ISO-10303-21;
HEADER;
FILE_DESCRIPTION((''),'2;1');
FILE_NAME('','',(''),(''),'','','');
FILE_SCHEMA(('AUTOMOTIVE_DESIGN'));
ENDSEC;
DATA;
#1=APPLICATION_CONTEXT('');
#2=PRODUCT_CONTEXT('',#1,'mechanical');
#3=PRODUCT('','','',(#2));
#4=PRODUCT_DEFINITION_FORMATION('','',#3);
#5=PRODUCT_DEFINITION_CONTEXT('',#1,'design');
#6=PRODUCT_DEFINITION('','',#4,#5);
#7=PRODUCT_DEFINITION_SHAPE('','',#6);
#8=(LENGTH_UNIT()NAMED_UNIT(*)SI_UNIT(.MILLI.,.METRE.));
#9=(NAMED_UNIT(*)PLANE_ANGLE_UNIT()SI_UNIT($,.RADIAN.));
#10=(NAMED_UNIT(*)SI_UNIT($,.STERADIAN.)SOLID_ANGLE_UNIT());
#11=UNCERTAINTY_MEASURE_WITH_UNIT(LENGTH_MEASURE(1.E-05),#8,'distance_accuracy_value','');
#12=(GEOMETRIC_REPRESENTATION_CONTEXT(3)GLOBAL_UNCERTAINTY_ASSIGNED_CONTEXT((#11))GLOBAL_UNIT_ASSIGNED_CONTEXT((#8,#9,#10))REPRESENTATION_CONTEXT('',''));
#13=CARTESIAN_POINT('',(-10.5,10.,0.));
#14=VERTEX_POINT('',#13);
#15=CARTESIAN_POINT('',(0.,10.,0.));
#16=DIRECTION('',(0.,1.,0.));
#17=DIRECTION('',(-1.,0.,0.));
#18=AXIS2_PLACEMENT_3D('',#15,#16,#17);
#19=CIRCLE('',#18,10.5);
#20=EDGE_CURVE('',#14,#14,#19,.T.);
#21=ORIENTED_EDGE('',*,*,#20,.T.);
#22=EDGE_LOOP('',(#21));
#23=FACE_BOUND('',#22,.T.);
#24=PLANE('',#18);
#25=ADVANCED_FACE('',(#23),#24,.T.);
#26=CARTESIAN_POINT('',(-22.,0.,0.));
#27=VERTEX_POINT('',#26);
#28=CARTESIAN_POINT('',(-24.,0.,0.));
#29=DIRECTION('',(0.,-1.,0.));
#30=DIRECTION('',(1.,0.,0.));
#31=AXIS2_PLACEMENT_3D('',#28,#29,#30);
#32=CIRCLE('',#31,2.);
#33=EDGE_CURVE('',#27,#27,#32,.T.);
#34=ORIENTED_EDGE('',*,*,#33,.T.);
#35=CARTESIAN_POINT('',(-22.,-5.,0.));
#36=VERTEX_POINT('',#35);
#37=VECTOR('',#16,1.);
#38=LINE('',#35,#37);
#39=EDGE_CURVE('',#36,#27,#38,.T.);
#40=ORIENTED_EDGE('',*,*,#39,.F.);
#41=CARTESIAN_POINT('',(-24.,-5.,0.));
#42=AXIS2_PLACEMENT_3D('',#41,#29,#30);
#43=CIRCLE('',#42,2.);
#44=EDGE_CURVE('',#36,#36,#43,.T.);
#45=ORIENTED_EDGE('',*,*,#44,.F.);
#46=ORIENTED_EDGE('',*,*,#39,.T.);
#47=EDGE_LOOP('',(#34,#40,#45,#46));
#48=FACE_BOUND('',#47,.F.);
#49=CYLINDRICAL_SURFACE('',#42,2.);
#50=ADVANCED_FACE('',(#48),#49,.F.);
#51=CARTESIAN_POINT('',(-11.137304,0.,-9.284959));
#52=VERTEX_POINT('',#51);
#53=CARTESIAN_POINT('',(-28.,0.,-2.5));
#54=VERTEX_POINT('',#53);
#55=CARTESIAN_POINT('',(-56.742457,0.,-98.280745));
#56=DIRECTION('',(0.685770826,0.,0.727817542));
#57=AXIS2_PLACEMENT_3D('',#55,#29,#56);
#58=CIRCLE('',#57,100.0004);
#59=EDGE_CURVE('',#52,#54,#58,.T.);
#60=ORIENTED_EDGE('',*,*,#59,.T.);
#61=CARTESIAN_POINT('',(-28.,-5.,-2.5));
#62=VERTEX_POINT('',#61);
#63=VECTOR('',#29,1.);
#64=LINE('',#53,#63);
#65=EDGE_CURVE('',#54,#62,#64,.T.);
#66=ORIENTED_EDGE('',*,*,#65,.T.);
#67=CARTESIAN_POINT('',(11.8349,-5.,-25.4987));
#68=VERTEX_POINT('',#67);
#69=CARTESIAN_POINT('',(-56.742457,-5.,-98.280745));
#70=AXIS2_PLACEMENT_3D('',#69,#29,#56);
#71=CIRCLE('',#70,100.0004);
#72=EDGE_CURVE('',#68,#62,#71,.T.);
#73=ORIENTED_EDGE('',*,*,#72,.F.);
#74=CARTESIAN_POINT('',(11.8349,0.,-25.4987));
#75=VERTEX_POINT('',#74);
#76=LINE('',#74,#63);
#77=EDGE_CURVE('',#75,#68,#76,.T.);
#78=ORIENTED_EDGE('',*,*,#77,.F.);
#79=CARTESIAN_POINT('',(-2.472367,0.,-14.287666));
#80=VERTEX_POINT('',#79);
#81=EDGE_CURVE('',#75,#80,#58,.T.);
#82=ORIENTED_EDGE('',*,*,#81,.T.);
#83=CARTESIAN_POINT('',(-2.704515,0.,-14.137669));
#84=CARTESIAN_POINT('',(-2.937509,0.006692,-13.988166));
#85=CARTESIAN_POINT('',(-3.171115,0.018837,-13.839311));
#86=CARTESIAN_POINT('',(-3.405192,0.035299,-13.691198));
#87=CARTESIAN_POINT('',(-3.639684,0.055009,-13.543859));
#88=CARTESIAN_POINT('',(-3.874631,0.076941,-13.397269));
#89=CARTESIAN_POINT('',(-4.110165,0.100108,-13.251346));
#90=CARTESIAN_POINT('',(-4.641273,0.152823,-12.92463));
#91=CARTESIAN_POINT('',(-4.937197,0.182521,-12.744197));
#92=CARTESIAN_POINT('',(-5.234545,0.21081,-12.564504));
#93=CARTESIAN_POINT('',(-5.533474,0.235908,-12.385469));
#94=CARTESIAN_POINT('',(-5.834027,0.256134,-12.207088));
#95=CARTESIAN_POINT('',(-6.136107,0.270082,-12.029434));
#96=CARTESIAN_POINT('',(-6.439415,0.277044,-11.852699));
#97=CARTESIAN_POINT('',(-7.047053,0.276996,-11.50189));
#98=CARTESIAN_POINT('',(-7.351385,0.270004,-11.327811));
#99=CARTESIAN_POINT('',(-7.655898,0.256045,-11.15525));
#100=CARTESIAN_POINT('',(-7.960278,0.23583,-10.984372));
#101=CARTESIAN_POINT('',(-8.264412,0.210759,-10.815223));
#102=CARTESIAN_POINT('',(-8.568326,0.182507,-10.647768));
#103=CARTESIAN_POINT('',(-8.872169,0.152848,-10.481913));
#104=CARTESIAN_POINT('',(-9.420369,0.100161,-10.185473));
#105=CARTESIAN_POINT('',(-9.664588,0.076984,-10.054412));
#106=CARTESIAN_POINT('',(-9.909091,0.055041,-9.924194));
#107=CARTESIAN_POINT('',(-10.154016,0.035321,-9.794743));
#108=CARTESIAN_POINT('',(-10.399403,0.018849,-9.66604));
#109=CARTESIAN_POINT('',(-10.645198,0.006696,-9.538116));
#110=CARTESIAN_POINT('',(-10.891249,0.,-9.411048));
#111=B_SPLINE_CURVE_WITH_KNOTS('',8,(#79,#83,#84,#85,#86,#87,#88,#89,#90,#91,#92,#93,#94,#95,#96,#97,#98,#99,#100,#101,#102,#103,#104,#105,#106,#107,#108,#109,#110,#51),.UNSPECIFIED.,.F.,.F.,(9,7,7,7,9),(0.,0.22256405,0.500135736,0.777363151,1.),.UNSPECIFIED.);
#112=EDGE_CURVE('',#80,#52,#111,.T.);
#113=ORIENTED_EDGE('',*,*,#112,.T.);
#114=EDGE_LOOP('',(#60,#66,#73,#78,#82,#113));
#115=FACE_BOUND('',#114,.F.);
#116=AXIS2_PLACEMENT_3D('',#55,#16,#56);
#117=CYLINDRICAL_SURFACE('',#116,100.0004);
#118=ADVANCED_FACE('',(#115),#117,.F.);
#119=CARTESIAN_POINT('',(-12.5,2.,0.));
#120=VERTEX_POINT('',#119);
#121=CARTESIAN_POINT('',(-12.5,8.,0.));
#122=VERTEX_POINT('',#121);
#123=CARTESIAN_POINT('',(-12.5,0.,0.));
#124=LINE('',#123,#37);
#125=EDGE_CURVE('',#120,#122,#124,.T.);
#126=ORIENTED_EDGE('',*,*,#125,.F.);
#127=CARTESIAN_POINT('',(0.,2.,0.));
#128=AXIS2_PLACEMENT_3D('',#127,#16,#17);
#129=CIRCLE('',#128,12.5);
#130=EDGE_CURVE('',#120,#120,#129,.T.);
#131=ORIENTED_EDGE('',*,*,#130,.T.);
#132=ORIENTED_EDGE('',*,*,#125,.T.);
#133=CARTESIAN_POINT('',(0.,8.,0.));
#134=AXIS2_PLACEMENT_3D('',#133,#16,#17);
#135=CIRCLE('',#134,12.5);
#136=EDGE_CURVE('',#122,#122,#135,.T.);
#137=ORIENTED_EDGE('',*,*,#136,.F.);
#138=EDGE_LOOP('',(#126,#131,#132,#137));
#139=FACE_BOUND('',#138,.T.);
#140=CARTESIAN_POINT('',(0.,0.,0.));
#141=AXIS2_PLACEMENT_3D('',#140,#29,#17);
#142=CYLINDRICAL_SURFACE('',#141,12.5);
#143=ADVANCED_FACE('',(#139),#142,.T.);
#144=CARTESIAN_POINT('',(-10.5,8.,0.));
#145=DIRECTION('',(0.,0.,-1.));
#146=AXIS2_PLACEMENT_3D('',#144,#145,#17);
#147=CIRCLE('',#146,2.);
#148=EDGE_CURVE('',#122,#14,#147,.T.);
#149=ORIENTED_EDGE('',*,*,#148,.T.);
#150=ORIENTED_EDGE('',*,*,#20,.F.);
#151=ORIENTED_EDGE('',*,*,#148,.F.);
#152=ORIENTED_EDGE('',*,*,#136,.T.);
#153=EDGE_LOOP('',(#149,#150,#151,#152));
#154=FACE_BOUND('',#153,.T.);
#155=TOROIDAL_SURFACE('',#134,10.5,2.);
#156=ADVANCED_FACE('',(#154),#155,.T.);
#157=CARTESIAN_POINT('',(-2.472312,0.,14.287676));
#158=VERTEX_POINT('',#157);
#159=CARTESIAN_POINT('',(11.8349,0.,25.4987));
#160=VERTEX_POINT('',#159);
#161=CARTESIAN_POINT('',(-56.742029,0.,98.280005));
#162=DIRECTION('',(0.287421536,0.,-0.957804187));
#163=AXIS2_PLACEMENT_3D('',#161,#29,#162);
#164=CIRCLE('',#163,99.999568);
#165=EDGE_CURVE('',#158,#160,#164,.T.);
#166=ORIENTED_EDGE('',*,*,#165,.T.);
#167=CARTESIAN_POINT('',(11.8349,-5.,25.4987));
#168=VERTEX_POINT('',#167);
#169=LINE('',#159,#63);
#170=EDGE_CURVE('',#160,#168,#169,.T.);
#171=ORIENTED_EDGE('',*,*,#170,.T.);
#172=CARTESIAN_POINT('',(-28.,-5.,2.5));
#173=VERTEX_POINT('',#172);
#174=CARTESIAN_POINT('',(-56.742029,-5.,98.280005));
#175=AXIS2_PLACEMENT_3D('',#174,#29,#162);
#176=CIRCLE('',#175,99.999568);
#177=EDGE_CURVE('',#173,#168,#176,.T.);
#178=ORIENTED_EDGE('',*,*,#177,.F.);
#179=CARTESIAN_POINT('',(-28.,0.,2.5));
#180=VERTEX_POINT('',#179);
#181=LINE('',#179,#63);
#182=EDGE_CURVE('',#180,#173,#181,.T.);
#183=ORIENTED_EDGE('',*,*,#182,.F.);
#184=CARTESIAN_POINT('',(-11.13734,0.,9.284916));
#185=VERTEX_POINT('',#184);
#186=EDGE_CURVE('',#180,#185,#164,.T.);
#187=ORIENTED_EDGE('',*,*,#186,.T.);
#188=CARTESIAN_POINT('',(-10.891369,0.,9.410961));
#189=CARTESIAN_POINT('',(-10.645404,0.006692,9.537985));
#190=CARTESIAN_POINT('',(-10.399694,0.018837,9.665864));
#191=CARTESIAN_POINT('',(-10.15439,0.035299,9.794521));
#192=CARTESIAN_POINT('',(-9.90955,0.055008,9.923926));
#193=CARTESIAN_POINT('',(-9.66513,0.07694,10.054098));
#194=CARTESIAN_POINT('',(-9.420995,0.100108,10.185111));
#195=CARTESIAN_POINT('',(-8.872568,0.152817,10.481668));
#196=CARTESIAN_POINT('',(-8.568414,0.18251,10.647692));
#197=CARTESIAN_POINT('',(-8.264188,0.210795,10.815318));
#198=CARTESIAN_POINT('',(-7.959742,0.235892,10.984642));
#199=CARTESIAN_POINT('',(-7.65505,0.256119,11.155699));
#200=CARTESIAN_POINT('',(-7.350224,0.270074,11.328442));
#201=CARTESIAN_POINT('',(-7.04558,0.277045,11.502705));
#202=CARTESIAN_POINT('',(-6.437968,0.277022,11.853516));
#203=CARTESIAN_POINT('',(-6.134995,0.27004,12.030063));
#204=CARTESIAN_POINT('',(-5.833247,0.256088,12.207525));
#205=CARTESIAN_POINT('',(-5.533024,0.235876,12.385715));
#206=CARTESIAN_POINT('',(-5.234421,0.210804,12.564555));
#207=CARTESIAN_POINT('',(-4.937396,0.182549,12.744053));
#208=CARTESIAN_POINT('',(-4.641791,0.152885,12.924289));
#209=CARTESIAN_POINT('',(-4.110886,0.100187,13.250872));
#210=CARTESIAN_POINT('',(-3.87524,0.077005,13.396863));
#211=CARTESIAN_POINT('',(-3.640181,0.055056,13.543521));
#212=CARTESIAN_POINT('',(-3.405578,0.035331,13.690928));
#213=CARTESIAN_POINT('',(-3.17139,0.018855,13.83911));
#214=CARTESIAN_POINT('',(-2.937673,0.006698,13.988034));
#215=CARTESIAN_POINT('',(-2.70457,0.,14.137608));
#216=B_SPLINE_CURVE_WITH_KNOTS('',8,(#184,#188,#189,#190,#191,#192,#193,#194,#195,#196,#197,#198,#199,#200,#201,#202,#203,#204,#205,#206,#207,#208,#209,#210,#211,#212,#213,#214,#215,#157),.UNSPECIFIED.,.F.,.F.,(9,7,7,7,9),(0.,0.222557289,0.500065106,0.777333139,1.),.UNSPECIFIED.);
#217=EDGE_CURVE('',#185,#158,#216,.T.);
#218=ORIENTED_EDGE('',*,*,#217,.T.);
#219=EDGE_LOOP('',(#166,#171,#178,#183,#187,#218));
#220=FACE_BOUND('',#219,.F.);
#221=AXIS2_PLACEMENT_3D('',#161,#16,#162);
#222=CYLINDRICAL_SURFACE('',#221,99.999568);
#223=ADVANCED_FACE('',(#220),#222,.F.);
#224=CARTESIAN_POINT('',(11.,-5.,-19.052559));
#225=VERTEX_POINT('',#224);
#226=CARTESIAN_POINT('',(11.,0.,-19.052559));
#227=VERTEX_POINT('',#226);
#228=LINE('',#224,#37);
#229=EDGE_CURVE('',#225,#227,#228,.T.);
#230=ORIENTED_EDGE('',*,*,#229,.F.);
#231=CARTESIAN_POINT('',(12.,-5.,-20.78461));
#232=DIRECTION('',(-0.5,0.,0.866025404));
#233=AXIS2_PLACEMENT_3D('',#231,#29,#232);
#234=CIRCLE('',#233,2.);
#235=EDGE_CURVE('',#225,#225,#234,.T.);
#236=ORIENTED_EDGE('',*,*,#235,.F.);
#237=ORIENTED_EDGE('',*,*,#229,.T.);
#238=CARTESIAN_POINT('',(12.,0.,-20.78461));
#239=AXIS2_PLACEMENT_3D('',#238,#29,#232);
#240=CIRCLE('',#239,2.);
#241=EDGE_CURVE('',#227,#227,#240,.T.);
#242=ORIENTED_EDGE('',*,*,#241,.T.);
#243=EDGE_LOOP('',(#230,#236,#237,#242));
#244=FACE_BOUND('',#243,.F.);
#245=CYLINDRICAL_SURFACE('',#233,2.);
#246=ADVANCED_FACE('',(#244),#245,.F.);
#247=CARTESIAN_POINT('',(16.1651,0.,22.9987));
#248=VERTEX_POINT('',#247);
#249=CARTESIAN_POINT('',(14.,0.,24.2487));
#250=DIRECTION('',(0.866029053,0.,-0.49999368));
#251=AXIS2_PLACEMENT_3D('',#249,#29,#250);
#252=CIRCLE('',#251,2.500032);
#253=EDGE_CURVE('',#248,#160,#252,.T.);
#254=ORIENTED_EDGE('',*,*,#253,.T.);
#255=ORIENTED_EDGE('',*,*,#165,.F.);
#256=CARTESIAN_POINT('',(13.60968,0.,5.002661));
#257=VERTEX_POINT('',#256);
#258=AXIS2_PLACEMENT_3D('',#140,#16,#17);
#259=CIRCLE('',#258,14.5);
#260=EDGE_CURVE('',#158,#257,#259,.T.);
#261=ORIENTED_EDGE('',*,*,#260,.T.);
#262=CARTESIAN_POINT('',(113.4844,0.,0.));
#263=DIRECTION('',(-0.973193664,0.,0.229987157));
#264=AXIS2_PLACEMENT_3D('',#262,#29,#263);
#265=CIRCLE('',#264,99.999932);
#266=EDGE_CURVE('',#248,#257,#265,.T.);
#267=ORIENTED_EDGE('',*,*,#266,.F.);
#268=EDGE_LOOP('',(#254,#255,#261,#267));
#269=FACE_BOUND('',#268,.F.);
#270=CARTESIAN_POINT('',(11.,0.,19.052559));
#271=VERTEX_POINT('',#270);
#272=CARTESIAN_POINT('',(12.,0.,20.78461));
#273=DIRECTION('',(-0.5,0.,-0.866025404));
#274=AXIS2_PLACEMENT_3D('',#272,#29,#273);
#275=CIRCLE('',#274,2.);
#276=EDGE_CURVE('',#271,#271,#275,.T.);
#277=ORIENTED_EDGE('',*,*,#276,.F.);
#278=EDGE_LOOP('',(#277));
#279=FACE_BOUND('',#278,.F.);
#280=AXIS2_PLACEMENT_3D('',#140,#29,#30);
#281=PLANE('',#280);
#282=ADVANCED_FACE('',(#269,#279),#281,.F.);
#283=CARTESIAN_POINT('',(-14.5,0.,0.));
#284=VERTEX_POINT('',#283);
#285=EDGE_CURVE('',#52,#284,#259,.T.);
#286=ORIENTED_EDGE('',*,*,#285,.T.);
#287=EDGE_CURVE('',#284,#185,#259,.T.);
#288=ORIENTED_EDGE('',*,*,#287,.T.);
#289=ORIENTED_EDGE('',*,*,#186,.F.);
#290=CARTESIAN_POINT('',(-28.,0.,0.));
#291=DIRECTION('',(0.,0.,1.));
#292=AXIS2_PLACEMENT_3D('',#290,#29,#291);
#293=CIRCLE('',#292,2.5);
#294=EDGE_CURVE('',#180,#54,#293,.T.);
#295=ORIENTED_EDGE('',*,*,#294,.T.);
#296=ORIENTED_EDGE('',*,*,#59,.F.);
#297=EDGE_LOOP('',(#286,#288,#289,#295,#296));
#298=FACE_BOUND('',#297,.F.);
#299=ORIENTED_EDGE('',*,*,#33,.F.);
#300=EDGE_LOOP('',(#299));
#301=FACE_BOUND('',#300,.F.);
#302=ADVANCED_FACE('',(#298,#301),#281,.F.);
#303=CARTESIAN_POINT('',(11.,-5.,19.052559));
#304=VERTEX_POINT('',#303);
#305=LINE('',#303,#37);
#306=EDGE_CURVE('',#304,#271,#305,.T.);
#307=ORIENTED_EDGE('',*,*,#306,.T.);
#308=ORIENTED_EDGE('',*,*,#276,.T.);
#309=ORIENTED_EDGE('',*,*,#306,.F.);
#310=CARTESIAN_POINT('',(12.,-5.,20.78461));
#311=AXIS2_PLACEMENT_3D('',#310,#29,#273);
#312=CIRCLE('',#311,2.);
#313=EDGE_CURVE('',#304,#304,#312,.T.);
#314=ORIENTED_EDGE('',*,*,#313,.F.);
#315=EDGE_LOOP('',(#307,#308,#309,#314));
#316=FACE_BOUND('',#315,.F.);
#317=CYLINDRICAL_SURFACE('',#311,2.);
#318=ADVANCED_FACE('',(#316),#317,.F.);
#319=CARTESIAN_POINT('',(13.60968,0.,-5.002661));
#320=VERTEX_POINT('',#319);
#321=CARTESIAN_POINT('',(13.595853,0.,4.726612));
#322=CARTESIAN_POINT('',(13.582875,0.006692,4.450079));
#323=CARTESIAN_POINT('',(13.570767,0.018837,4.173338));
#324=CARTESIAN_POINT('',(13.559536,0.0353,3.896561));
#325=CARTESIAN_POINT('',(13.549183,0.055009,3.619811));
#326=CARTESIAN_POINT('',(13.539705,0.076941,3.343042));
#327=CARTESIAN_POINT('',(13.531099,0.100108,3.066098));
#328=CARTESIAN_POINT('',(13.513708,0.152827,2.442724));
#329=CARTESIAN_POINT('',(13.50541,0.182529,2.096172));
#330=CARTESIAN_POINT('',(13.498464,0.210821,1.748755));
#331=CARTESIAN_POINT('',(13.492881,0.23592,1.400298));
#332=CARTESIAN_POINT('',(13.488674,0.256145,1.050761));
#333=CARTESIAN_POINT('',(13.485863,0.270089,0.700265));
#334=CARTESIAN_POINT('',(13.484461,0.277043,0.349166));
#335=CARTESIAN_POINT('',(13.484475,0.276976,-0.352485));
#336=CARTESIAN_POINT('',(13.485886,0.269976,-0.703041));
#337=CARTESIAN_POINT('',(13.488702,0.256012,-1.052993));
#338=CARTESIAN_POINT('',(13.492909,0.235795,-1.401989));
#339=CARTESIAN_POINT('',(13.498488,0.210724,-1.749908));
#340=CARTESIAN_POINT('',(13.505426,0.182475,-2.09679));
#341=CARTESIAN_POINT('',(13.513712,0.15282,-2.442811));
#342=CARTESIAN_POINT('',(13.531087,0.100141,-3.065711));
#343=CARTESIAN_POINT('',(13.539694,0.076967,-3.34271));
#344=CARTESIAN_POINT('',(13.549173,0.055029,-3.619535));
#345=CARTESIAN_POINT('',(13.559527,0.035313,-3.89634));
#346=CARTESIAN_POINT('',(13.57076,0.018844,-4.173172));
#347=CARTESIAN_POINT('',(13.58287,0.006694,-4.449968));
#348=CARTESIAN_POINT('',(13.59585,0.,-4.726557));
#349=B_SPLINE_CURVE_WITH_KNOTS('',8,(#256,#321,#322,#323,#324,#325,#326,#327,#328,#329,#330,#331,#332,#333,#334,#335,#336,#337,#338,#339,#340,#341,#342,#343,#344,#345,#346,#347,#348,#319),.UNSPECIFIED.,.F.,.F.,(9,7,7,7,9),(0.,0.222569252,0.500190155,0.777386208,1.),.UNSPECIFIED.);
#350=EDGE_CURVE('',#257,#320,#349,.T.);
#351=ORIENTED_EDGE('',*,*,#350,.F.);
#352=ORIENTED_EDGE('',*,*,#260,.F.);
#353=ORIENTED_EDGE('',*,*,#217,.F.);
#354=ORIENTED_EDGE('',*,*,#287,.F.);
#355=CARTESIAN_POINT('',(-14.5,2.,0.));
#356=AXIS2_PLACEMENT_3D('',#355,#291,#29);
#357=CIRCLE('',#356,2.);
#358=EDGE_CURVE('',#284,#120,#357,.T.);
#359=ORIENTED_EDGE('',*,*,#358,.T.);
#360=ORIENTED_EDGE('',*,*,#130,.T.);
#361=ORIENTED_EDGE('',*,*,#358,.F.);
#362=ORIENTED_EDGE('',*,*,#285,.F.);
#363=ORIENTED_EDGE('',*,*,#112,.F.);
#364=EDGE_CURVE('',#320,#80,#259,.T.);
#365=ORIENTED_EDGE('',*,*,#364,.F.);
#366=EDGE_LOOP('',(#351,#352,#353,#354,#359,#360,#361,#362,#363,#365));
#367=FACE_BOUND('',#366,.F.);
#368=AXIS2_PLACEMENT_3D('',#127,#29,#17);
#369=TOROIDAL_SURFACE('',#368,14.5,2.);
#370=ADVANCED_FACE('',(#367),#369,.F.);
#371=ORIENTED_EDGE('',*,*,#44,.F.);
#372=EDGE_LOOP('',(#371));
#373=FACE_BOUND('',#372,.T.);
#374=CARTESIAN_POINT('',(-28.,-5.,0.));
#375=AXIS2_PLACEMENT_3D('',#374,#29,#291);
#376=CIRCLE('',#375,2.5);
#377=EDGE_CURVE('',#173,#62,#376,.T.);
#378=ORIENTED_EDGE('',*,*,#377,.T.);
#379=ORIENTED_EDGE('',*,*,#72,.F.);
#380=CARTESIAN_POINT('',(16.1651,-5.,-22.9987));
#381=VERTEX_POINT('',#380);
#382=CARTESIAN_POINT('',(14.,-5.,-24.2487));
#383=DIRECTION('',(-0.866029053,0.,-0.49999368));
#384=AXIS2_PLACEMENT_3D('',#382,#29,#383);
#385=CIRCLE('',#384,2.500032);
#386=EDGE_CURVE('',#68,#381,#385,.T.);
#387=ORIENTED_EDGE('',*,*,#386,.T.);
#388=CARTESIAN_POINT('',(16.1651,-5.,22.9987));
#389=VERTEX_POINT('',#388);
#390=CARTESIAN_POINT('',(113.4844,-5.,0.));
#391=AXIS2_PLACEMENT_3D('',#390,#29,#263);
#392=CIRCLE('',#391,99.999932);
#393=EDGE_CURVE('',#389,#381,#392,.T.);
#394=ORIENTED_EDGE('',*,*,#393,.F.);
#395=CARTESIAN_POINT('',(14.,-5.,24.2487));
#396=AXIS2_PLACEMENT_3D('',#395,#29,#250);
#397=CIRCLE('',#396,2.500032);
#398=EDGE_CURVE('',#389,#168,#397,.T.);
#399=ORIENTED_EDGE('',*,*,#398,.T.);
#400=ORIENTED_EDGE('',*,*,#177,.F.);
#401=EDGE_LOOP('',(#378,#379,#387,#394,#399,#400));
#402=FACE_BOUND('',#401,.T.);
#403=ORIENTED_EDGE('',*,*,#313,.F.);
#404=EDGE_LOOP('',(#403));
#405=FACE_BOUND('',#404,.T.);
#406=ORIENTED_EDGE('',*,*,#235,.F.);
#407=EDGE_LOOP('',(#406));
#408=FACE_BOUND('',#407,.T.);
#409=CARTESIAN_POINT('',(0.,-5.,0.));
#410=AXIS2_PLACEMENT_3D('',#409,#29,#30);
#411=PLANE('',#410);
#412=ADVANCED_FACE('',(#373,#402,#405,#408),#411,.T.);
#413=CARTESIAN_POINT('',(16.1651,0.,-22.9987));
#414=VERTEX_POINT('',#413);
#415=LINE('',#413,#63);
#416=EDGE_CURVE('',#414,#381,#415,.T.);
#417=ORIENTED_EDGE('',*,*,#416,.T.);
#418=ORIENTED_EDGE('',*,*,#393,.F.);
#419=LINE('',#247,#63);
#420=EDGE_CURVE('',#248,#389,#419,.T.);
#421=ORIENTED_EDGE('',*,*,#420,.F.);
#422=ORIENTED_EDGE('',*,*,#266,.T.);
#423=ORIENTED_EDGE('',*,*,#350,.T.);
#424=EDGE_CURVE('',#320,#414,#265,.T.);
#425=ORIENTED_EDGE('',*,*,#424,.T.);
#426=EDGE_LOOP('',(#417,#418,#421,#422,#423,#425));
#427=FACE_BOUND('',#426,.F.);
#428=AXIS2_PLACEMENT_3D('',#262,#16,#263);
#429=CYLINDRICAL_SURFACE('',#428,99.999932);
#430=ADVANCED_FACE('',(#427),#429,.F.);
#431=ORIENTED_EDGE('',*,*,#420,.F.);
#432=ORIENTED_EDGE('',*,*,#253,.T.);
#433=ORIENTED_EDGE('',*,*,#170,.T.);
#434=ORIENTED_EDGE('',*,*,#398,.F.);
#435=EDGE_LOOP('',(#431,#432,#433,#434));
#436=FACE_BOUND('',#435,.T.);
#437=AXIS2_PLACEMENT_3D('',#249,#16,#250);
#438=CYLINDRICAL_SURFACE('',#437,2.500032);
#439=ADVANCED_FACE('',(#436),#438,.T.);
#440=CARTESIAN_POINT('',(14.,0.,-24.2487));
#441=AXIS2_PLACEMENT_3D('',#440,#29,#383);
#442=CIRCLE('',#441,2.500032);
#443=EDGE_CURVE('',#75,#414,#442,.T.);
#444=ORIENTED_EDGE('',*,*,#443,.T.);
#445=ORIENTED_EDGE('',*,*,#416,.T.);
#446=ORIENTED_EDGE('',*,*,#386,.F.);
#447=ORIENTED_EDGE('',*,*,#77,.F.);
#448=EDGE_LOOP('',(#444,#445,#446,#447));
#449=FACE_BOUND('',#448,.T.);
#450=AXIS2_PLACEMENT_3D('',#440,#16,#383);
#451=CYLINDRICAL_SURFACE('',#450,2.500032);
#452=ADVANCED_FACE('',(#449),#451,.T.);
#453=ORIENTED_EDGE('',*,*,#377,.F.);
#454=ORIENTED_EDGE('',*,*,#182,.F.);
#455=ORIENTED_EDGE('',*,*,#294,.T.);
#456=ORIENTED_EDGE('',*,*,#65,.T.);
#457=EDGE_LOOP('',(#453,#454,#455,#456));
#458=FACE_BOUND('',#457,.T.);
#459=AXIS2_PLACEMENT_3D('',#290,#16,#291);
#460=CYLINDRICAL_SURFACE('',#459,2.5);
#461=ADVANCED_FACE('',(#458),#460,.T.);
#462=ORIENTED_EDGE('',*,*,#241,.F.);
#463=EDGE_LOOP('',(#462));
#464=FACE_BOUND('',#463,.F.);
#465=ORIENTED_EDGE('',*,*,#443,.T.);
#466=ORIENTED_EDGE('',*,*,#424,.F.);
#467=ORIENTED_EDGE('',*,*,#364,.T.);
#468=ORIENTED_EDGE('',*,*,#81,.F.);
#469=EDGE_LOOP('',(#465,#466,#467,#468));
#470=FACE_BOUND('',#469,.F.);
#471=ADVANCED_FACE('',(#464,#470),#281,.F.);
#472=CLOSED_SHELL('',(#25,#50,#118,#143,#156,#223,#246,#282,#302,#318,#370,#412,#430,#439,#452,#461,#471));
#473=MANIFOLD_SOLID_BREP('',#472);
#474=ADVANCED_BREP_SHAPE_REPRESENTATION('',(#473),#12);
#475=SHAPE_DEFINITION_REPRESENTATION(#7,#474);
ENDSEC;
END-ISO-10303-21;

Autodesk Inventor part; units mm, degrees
ref_plane "YZ Plane" through (0, 0, 0) normal (1, 0, 0) x (0, 1, 0)
ref_plane "XZ Plane" through (0, 0, 0) normal (0, 1, 0) x (-1, 0, 0)
ref_plane "XY Plane" through (0, 0, 0) normal (0, 0, 1) x (1, 0, 0)
sketch "Sketch1" plane through (0, 0, 0) normal (0, 1, 0) x (-1, 0, 0)
  circle A0 centre (0, 0) radius 12.5
  circle A1 centre (0, 0) radius 12
  dimension "d0" = 25
  dimension "d1" = 24
extrude "Extrusion1" add sketch "Sketch1" along normal blind 10 contours A0 | A1
sketch "Sketch2" plane through (0, 0, 0) normal (0, -1, 0) x (1, 0, 0)
  line L0 (0, 0) -> (-28, 0)
  line L1 (0, 0) -> (14, -24.2487)
  line L2 (0, 0) -> (14, 24.2487)
  line L3 (0, 2.5) -> (-28, 2.5)
  line L4 (0, -2.5) -> (-28, -2.5)
  arc A0 (-28, 2.5) -> (-28, -2.5) centre (-28, 0) ccw
  line L5 (2.1651, 1.25) -> (16.1651, -22.9987)
  line L6 (-2.1651, -1.25) -> (11.8349, -25.4987)
  arc A1 (11.8349, -25.4987) -> (16.1651, -22.9987) centre (14, -24.2487) ccw
  line L7 (-2.1651, 1.25) -> (11.8349, 25.4987)
  line L8 (2.1651, -1.25) -> (16.1651, 22.9987)
  arc A2 (16.1651, 22.9987) -> (11.8349, 25.4987) centre (14, 24.2487) ccw
  arc A3 (11.8349, -25.4987) -> (-28, -2.5) centre (-56.7422, -98.2804) ccw
  arc A4 (16.1651, 22.9987) -> (16.1651, -22.9987) centre (113.4844, 0) ccw
  arc A5 (-28, 2.5) -> (11.8349, 25.4987) centre (-56.7422, 98.2804) ccw
  dimension "d4" = 28
  dimension "d7" = 360
  dimension "d9" = 2.5
  dimension "d10" = 2.5
  dimension "d11" = 2.5
  dimension "d14" = 360
  dimension "d16" = 100
  dimension "d19" = 360
extrude "Extrusion2" add sketch "Sketch2" along normal blind 5
fillet "Fillet1" radius 2 2 edges at (12.5, 0, 0) (12.5, 10, 0)
sketch "Sketch3" plane through (0, -5, 0) normal (0, -1, 0) x (1, 0, 0)
  circle A0 centre (0, 0) radius 10.5
  line L0 (0, 0) -> (-24, 0)
  circle A1 centre (-24, 0) radius 2
  dimension "d24" = 24
  dimension "d25" = 4
extrude "Extrusion3" cut sketch "Sketch3" against normal blind 5 contours A1
pattern_circular "Circular Pattern1" count 3 over 360 about axis through (0, 0, 0) along (0, 1, 0) of "Extrusion3"
properties part number "Portaplanetas"
